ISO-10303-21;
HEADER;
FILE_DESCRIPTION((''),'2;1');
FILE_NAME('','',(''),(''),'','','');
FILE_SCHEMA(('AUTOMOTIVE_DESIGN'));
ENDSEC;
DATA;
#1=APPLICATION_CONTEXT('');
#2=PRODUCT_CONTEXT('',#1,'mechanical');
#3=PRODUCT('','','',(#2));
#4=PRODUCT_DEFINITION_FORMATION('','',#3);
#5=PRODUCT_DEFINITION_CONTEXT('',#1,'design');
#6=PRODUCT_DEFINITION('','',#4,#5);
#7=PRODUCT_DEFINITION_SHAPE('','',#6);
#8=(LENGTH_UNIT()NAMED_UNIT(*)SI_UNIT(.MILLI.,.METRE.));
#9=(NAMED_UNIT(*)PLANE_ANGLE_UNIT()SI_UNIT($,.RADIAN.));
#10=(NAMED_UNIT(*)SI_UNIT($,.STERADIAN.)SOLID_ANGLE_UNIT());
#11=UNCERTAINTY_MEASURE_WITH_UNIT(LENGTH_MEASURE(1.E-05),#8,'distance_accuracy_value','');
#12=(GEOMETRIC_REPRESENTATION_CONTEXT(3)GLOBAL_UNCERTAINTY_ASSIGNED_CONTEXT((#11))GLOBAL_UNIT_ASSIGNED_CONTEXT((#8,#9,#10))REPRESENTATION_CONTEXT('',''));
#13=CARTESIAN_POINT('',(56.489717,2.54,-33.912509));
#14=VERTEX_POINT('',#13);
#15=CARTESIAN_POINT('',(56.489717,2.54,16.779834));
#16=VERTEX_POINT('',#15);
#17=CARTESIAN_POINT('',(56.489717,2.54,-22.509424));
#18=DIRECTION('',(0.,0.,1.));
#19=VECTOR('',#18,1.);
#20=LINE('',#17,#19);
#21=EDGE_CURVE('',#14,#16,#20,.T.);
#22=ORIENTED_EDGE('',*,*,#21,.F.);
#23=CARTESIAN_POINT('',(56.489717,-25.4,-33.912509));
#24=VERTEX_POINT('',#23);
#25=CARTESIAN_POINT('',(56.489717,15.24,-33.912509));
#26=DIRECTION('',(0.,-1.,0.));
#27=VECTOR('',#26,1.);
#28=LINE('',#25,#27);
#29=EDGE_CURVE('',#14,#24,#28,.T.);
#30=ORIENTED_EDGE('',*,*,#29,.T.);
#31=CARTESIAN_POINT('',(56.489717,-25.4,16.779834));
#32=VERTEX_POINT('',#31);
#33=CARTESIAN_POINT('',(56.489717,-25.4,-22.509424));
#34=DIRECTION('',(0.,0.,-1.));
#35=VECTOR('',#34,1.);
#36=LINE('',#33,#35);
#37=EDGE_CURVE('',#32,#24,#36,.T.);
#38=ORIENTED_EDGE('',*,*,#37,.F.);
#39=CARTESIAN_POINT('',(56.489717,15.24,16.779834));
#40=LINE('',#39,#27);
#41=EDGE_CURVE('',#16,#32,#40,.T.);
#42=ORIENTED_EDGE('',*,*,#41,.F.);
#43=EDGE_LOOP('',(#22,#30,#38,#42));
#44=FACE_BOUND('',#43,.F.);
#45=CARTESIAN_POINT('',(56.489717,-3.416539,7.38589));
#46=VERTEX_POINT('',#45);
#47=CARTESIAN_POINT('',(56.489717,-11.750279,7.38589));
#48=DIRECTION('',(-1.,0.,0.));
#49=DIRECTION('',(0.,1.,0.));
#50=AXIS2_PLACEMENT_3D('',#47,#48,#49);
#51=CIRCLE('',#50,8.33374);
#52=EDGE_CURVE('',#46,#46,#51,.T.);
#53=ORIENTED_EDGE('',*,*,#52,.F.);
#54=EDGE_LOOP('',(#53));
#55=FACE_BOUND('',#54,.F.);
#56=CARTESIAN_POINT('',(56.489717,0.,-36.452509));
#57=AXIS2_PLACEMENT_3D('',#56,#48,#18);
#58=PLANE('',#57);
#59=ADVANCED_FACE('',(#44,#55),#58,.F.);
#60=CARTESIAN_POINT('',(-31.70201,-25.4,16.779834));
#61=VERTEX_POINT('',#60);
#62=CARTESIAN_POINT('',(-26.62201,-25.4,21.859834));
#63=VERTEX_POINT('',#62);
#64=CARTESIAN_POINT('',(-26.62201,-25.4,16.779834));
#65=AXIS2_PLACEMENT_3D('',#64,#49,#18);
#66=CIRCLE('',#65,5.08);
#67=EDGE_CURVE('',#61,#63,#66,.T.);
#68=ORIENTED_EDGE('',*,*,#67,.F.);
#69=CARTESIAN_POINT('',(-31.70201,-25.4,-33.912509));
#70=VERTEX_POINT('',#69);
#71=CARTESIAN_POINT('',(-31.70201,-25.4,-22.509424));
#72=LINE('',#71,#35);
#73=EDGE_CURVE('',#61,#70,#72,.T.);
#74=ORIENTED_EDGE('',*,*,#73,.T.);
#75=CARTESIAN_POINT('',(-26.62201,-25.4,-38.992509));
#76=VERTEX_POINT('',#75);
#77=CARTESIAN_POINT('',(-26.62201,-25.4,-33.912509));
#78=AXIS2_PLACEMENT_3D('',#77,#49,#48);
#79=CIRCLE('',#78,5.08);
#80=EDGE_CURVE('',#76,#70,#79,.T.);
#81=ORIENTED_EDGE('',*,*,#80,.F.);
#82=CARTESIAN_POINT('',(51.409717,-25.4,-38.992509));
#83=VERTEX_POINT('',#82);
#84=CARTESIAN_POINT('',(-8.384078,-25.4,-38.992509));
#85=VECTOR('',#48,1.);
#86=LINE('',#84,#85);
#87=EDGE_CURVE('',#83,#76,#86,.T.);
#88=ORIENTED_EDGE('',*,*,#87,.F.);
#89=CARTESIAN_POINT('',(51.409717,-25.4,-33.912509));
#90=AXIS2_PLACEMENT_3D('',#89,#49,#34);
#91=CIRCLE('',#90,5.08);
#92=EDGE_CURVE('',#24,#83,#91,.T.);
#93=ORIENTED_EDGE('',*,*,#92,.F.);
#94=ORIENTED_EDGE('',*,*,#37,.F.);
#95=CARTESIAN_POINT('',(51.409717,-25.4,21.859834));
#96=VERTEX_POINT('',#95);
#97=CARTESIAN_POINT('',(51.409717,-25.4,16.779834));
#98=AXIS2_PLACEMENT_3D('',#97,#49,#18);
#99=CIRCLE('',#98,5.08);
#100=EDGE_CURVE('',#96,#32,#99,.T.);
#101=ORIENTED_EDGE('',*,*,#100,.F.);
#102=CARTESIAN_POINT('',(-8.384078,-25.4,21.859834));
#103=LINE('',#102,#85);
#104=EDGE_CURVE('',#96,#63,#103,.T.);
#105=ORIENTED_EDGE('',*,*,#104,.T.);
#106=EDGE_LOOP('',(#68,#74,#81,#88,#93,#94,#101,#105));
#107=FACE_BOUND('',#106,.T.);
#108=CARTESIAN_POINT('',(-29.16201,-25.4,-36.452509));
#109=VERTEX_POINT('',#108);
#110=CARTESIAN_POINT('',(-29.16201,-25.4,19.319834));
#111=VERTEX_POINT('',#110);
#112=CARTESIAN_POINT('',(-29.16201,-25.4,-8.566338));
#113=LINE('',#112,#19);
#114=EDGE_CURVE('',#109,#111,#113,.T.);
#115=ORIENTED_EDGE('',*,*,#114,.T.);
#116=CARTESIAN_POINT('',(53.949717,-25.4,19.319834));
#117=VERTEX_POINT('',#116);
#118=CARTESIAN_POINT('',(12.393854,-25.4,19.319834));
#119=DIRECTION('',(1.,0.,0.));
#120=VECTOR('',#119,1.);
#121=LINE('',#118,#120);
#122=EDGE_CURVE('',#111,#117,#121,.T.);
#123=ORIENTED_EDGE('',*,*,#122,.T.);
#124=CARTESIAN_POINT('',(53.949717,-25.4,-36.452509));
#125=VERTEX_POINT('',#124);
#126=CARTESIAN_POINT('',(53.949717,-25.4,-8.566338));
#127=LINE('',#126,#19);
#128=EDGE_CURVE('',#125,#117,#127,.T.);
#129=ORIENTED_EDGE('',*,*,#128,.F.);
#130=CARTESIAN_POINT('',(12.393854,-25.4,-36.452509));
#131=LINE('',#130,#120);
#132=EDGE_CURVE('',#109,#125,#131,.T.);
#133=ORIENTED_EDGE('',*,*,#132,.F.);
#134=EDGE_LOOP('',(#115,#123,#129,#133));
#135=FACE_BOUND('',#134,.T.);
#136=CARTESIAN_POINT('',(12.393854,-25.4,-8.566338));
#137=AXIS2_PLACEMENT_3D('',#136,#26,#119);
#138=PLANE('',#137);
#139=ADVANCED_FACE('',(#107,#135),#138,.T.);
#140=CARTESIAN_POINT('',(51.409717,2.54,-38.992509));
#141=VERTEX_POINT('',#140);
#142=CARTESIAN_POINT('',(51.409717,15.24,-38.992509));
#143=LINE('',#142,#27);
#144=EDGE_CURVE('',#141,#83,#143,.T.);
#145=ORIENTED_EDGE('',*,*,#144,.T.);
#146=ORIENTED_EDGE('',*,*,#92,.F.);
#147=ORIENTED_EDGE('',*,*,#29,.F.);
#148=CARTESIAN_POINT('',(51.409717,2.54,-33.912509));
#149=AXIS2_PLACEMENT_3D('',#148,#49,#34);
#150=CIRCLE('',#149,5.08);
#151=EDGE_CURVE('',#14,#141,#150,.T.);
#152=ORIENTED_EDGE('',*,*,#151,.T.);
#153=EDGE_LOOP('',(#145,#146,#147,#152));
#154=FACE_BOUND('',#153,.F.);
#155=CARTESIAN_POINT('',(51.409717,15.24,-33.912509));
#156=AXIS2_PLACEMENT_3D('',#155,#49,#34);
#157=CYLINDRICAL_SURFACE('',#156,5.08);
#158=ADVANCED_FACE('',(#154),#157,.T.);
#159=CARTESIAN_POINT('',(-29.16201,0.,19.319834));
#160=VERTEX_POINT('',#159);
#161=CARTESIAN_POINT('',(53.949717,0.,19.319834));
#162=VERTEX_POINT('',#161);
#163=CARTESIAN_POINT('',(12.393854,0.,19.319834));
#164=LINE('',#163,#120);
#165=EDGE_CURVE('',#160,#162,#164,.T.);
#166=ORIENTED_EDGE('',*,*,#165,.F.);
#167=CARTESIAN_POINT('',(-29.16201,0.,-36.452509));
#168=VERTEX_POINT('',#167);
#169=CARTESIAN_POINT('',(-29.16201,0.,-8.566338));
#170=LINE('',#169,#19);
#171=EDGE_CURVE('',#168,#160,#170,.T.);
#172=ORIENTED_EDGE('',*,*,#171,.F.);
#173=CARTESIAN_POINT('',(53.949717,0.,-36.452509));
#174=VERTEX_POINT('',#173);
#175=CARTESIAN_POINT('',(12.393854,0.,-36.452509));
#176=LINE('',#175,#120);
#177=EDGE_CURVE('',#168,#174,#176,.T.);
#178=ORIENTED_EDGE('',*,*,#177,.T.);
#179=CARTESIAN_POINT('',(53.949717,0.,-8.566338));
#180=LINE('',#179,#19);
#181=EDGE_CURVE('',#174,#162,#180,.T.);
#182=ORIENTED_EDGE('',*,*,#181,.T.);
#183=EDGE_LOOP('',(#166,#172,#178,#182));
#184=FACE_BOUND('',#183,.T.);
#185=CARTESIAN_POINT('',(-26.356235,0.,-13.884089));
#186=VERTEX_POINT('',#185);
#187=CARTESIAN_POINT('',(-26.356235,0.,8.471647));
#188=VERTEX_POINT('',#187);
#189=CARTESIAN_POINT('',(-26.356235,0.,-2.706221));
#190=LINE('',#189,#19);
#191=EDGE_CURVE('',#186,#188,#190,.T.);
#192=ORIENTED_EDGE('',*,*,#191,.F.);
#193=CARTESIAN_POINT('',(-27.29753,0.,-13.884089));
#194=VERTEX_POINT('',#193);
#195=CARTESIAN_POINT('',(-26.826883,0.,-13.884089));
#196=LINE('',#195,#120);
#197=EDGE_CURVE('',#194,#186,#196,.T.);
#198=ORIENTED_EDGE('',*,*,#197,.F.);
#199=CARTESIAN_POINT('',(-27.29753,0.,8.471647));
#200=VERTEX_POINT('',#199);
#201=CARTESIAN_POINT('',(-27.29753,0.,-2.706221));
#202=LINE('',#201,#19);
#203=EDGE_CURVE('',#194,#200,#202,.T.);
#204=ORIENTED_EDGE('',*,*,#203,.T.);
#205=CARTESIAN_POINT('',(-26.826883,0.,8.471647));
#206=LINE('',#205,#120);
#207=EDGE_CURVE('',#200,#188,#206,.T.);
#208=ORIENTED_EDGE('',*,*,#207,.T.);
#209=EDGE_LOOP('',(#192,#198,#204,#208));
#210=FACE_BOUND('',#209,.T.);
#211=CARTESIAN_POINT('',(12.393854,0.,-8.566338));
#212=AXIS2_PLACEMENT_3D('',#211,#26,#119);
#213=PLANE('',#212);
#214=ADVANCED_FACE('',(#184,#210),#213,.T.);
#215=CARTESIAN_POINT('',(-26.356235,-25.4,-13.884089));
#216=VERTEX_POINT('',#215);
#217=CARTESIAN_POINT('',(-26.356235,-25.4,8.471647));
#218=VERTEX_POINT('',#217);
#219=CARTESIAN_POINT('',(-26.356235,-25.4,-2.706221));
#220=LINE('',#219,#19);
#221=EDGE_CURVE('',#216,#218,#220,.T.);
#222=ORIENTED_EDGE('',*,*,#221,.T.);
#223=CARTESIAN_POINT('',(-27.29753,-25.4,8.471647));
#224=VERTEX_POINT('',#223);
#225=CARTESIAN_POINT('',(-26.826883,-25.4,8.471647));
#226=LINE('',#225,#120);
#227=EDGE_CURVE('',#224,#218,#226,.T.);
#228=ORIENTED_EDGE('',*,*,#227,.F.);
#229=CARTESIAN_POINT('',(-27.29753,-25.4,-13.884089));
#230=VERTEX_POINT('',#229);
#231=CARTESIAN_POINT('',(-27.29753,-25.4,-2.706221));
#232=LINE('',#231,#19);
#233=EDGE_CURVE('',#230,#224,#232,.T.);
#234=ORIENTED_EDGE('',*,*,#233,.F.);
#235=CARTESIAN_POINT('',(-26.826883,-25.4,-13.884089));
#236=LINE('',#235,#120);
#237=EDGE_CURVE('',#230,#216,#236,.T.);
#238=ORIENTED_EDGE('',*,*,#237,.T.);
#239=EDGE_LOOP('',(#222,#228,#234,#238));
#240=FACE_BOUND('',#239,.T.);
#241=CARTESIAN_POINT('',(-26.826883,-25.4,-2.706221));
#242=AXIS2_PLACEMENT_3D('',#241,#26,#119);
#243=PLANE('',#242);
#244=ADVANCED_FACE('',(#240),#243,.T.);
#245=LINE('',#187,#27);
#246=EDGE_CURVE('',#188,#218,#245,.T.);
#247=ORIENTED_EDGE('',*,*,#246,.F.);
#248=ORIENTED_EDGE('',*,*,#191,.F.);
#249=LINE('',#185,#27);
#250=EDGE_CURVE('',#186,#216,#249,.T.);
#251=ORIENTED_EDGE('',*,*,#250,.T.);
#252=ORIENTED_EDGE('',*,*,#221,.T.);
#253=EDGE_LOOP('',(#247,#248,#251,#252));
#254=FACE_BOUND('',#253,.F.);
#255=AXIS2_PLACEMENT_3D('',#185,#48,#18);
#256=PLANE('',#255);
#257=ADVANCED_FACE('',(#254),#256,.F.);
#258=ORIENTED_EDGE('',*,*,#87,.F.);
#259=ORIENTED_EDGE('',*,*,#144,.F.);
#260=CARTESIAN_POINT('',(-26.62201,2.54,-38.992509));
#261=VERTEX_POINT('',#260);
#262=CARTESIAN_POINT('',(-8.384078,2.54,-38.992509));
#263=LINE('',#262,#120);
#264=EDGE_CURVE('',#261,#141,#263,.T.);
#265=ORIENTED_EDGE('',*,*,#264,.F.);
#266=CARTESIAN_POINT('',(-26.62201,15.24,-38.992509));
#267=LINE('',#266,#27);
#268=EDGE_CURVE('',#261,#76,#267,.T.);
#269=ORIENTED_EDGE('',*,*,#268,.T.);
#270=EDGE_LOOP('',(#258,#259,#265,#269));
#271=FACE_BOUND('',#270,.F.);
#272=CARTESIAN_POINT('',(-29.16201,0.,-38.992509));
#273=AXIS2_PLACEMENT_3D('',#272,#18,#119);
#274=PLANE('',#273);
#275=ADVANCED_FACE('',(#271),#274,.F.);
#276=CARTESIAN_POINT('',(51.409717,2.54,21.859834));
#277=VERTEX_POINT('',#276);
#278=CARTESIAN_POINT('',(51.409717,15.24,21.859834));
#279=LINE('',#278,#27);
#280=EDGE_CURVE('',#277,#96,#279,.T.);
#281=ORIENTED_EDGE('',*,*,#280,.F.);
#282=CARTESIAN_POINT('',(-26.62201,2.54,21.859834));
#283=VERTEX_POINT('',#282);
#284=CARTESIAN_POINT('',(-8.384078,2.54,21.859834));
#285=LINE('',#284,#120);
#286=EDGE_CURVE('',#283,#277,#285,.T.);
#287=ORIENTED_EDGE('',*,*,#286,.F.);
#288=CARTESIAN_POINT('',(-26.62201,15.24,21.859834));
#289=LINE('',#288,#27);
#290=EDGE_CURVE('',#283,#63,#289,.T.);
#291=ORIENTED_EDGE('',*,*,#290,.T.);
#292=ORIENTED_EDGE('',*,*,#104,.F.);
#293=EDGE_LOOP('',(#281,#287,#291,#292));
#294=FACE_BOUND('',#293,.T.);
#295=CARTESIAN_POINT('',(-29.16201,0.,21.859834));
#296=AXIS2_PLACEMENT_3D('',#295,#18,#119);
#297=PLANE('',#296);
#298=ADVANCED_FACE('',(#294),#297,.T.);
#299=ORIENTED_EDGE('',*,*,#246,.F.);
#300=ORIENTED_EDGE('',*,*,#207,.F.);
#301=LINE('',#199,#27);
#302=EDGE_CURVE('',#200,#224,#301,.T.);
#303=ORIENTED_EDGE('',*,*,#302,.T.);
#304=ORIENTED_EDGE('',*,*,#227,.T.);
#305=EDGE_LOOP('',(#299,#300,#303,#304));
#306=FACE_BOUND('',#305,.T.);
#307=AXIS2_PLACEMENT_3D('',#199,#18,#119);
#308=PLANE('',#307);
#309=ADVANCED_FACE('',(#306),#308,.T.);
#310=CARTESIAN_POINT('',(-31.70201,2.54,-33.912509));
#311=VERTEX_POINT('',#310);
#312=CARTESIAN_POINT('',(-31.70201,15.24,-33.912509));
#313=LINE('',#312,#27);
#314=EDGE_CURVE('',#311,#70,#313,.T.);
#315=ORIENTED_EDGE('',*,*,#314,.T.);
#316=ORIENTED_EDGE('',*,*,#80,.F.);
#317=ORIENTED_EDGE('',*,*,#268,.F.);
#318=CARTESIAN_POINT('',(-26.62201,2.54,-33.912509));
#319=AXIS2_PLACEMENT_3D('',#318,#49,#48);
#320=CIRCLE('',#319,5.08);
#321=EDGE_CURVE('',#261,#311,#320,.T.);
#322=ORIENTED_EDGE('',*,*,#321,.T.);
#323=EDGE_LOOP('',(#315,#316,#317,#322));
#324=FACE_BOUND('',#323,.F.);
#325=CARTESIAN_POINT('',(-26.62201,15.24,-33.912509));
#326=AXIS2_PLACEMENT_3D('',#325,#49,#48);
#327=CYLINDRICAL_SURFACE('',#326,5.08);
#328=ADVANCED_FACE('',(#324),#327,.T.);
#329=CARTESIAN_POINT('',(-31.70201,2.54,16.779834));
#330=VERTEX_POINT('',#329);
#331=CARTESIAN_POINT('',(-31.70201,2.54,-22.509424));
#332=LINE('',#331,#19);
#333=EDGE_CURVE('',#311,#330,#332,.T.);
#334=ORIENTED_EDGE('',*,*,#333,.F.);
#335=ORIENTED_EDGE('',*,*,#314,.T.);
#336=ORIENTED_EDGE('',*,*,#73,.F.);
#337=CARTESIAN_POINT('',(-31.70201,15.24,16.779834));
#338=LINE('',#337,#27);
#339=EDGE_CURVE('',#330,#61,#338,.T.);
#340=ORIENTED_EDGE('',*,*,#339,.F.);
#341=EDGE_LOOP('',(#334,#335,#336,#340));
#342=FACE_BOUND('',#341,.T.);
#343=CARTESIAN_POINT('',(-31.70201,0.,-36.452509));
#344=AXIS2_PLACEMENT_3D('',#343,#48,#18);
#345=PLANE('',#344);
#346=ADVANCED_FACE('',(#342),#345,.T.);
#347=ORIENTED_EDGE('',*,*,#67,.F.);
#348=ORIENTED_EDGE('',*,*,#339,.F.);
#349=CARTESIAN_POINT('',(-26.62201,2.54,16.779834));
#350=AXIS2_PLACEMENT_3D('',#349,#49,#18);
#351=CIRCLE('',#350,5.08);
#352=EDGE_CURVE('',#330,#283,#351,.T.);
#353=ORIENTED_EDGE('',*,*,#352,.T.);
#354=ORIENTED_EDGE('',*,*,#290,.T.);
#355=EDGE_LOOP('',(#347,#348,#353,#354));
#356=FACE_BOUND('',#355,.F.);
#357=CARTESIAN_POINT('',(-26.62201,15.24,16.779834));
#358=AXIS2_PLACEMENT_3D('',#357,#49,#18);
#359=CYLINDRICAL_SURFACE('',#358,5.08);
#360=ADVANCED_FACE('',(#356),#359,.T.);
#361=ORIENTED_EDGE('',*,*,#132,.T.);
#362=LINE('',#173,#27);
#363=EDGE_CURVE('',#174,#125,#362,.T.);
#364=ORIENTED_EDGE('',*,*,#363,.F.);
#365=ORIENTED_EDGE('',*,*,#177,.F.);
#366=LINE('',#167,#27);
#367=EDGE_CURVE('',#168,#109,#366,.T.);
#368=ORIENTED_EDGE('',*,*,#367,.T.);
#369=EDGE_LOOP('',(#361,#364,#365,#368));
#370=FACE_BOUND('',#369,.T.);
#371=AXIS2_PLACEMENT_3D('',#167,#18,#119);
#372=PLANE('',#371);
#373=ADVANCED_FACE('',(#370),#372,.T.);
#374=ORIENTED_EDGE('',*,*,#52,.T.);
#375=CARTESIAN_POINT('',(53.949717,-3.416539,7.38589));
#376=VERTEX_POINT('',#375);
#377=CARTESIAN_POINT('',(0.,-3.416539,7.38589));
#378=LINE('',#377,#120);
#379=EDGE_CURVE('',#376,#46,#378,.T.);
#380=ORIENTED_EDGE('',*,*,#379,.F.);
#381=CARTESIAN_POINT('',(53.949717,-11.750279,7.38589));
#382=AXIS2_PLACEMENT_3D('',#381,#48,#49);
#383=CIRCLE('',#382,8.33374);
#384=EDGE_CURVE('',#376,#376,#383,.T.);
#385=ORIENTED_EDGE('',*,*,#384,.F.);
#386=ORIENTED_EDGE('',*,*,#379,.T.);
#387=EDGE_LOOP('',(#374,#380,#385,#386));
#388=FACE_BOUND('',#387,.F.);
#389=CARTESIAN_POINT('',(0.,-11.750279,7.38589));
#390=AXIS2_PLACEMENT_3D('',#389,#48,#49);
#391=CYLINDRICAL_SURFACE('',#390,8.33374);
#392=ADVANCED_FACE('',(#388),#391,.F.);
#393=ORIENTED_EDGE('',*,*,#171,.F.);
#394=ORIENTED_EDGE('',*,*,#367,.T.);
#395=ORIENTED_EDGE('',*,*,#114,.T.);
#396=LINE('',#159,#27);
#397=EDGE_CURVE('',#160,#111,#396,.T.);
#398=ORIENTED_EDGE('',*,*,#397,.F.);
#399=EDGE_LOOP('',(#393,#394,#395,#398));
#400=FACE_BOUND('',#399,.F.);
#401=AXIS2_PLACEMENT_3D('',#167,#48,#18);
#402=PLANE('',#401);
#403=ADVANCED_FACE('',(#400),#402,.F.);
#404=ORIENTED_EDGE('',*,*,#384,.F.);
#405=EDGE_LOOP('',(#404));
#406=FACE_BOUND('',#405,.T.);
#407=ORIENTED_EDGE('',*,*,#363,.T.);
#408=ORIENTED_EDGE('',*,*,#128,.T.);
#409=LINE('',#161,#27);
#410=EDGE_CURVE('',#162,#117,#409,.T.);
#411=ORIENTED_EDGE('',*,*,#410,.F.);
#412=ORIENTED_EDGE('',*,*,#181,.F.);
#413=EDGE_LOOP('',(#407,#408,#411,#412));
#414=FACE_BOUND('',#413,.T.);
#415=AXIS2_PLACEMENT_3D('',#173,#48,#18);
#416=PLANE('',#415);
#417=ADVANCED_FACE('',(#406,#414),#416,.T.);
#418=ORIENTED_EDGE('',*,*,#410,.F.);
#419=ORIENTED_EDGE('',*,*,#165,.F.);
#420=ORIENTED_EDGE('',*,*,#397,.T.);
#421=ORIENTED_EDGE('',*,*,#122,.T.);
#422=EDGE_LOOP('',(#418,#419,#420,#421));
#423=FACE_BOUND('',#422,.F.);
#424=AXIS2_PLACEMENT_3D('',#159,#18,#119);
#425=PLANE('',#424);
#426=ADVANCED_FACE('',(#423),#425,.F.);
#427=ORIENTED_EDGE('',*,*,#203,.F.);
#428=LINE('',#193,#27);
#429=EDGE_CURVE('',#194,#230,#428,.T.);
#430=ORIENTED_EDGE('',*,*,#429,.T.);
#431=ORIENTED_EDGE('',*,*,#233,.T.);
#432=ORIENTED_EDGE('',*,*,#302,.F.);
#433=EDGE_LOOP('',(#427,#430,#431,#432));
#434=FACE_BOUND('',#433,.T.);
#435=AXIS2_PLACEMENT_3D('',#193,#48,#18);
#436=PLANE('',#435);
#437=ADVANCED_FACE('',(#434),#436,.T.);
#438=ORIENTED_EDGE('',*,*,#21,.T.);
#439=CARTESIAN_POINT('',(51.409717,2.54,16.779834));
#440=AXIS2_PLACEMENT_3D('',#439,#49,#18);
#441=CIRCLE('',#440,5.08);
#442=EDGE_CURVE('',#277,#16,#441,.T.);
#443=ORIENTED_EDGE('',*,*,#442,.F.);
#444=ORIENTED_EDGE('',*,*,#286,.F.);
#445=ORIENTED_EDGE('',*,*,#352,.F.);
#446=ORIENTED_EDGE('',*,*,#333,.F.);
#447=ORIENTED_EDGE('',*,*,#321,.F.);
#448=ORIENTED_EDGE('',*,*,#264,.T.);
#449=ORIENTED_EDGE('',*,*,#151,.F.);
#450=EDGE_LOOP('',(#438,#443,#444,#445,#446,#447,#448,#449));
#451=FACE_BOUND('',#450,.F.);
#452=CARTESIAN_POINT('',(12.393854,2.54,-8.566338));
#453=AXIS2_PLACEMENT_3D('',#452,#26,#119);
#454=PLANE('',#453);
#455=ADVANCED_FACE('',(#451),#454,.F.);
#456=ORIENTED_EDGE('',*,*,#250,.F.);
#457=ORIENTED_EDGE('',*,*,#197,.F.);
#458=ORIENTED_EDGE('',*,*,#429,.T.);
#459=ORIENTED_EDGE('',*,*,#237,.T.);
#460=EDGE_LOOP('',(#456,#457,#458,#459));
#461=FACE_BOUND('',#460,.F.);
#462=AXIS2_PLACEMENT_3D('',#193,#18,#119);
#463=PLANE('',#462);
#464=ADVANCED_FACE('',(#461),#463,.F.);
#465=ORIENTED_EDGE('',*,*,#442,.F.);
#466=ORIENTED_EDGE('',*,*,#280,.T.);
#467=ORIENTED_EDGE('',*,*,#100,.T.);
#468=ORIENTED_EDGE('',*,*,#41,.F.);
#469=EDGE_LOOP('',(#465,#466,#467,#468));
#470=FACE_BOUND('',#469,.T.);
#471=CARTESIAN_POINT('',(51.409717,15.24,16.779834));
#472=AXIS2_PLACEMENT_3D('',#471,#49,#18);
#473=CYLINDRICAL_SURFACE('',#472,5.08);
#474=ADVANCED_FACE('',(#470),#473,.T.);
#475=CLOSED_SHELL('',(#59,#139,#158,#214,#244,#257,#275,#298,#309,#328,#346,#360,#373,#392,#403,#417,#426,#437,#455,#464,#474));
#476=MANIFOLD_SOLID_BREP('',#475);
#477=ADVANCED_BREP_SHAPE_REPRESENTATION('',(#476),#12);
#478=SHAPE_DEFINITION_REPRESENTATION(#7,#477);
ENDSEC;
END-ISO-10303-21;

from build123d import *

# Parameters (mm, degrees)
F0_W        = 83.1117276102
F0_H        = 55.7723436505
F1_DEPTH    = 25.4
F2_T        = 2.54
F3_T1_DEPTH = 53.34
F5_D        = 16.66748
F5_DEPTH    = 56.4907174323
F6_W        = 0.9412951767
F6_H        = 22.3557362333
F7_DEPTH    = 25.4


# Not quite as in the source:
# - a fillet or chamfer that OpenCascade refuses, or shapes differently, is made with other operations: its cross-section is extruded or revolved along the edge and cut away or added


with BuildPart() as f1:
    # F0 (on Front) → F1 (new body)
    with BuildSketch(Plane.XZ):
        with Locations((12.3938536271, -8.5663376376)):
            Rectangle(F0_W, F0_H)
    extrude(amount=F1_DEPTH)

    # F2
    f2_openings = [f1.faces().sort_by_distance(p)[0] for p in [
        (12.393854, -25.4, -8.566338),
    ]]
    offset(amount=F2_T, openings=f2_openings, kind=Kind.INTERSECTION)

    # F3: fillet of radius 5.08 on 4 edges, made by hand

    # F3_s2 → F3_t1 (cut)
    with BuildSketch(Plane.XZ.offset(-15.24)):
        with BuildLine():
            ThreePointArc((51.4097174323, 21.8598341876), (55.0018198807, 20.3719366361), (56.4897174323, 16.7798341876))
            Line((56.4897174323, 16.7798341876), (56.4897174323, 21.8598341876))
            Line((56.4897174323, 21.8598341876), (51.4097174323, 21.8598341876))
        make_face()
        with BuildLine():
            ThreePointArc((-26.622010178, 21.8598341876), (-30.2141126264, 20.3719366361), (-31.702010178, 16.7798341876))
            Line((-31.702010178, 16.7798341876), (-31.702010178, 21.8598341876))
            Line((-31.702010178, 21.8598341876), (-26.622010178, 21.8598341876))
        make_face()
        with BuildLine():
            ThreePointArc((-31.702010178, -33.9125094628), (-30.2141126264, -37.5046119113), (-26.622010178, -38.9925094628))
            Line((-26.622010178, -38.9925094628), (-31.702010178, -38.9925094628))
            Line((-31.702010178, -38.9925094628), (-31.702010178, -33.9125094628))
        make_face()
        with BuildLine():
            ThreePointArc((51.4097174323, -38.9925094628), (55.0018198807, -37.5046119113), (56.4897174323, -33.9125094628))
            Line((56.4897174323, -33.9125094628), (56.4897174323, -38.9925094628))
            Line((56.4897174323, -38.9925094628), (51.4097174323, -38.9925094628))
        make_face()
    extrude(amount=F3_T1_DEPTH, mode=Mode.SUBTRACT)

    # F5 (through all, one way)
    with BuildSketch(Plane(origin=(0, 0, 0), x_dir=(0, 1, 0), z_dir=(-1, 0, 0))):
        with Locations((-11.7502789944, -7.3858899996)):
            Circle(F5_D / 2)
    extrude(amount=-F5_DEPTH, mode=Mode.SUBTRACT)

    # F6 (on Front) → F7 (join)
    with BuildSketch(Plane.XZ):
        with Locations((-26.8268827349, -2.7062208392)):
            Rectangle(F6_W, F6_H)
    extrude(amount=F7_DEPTH)


solid = f1.part
